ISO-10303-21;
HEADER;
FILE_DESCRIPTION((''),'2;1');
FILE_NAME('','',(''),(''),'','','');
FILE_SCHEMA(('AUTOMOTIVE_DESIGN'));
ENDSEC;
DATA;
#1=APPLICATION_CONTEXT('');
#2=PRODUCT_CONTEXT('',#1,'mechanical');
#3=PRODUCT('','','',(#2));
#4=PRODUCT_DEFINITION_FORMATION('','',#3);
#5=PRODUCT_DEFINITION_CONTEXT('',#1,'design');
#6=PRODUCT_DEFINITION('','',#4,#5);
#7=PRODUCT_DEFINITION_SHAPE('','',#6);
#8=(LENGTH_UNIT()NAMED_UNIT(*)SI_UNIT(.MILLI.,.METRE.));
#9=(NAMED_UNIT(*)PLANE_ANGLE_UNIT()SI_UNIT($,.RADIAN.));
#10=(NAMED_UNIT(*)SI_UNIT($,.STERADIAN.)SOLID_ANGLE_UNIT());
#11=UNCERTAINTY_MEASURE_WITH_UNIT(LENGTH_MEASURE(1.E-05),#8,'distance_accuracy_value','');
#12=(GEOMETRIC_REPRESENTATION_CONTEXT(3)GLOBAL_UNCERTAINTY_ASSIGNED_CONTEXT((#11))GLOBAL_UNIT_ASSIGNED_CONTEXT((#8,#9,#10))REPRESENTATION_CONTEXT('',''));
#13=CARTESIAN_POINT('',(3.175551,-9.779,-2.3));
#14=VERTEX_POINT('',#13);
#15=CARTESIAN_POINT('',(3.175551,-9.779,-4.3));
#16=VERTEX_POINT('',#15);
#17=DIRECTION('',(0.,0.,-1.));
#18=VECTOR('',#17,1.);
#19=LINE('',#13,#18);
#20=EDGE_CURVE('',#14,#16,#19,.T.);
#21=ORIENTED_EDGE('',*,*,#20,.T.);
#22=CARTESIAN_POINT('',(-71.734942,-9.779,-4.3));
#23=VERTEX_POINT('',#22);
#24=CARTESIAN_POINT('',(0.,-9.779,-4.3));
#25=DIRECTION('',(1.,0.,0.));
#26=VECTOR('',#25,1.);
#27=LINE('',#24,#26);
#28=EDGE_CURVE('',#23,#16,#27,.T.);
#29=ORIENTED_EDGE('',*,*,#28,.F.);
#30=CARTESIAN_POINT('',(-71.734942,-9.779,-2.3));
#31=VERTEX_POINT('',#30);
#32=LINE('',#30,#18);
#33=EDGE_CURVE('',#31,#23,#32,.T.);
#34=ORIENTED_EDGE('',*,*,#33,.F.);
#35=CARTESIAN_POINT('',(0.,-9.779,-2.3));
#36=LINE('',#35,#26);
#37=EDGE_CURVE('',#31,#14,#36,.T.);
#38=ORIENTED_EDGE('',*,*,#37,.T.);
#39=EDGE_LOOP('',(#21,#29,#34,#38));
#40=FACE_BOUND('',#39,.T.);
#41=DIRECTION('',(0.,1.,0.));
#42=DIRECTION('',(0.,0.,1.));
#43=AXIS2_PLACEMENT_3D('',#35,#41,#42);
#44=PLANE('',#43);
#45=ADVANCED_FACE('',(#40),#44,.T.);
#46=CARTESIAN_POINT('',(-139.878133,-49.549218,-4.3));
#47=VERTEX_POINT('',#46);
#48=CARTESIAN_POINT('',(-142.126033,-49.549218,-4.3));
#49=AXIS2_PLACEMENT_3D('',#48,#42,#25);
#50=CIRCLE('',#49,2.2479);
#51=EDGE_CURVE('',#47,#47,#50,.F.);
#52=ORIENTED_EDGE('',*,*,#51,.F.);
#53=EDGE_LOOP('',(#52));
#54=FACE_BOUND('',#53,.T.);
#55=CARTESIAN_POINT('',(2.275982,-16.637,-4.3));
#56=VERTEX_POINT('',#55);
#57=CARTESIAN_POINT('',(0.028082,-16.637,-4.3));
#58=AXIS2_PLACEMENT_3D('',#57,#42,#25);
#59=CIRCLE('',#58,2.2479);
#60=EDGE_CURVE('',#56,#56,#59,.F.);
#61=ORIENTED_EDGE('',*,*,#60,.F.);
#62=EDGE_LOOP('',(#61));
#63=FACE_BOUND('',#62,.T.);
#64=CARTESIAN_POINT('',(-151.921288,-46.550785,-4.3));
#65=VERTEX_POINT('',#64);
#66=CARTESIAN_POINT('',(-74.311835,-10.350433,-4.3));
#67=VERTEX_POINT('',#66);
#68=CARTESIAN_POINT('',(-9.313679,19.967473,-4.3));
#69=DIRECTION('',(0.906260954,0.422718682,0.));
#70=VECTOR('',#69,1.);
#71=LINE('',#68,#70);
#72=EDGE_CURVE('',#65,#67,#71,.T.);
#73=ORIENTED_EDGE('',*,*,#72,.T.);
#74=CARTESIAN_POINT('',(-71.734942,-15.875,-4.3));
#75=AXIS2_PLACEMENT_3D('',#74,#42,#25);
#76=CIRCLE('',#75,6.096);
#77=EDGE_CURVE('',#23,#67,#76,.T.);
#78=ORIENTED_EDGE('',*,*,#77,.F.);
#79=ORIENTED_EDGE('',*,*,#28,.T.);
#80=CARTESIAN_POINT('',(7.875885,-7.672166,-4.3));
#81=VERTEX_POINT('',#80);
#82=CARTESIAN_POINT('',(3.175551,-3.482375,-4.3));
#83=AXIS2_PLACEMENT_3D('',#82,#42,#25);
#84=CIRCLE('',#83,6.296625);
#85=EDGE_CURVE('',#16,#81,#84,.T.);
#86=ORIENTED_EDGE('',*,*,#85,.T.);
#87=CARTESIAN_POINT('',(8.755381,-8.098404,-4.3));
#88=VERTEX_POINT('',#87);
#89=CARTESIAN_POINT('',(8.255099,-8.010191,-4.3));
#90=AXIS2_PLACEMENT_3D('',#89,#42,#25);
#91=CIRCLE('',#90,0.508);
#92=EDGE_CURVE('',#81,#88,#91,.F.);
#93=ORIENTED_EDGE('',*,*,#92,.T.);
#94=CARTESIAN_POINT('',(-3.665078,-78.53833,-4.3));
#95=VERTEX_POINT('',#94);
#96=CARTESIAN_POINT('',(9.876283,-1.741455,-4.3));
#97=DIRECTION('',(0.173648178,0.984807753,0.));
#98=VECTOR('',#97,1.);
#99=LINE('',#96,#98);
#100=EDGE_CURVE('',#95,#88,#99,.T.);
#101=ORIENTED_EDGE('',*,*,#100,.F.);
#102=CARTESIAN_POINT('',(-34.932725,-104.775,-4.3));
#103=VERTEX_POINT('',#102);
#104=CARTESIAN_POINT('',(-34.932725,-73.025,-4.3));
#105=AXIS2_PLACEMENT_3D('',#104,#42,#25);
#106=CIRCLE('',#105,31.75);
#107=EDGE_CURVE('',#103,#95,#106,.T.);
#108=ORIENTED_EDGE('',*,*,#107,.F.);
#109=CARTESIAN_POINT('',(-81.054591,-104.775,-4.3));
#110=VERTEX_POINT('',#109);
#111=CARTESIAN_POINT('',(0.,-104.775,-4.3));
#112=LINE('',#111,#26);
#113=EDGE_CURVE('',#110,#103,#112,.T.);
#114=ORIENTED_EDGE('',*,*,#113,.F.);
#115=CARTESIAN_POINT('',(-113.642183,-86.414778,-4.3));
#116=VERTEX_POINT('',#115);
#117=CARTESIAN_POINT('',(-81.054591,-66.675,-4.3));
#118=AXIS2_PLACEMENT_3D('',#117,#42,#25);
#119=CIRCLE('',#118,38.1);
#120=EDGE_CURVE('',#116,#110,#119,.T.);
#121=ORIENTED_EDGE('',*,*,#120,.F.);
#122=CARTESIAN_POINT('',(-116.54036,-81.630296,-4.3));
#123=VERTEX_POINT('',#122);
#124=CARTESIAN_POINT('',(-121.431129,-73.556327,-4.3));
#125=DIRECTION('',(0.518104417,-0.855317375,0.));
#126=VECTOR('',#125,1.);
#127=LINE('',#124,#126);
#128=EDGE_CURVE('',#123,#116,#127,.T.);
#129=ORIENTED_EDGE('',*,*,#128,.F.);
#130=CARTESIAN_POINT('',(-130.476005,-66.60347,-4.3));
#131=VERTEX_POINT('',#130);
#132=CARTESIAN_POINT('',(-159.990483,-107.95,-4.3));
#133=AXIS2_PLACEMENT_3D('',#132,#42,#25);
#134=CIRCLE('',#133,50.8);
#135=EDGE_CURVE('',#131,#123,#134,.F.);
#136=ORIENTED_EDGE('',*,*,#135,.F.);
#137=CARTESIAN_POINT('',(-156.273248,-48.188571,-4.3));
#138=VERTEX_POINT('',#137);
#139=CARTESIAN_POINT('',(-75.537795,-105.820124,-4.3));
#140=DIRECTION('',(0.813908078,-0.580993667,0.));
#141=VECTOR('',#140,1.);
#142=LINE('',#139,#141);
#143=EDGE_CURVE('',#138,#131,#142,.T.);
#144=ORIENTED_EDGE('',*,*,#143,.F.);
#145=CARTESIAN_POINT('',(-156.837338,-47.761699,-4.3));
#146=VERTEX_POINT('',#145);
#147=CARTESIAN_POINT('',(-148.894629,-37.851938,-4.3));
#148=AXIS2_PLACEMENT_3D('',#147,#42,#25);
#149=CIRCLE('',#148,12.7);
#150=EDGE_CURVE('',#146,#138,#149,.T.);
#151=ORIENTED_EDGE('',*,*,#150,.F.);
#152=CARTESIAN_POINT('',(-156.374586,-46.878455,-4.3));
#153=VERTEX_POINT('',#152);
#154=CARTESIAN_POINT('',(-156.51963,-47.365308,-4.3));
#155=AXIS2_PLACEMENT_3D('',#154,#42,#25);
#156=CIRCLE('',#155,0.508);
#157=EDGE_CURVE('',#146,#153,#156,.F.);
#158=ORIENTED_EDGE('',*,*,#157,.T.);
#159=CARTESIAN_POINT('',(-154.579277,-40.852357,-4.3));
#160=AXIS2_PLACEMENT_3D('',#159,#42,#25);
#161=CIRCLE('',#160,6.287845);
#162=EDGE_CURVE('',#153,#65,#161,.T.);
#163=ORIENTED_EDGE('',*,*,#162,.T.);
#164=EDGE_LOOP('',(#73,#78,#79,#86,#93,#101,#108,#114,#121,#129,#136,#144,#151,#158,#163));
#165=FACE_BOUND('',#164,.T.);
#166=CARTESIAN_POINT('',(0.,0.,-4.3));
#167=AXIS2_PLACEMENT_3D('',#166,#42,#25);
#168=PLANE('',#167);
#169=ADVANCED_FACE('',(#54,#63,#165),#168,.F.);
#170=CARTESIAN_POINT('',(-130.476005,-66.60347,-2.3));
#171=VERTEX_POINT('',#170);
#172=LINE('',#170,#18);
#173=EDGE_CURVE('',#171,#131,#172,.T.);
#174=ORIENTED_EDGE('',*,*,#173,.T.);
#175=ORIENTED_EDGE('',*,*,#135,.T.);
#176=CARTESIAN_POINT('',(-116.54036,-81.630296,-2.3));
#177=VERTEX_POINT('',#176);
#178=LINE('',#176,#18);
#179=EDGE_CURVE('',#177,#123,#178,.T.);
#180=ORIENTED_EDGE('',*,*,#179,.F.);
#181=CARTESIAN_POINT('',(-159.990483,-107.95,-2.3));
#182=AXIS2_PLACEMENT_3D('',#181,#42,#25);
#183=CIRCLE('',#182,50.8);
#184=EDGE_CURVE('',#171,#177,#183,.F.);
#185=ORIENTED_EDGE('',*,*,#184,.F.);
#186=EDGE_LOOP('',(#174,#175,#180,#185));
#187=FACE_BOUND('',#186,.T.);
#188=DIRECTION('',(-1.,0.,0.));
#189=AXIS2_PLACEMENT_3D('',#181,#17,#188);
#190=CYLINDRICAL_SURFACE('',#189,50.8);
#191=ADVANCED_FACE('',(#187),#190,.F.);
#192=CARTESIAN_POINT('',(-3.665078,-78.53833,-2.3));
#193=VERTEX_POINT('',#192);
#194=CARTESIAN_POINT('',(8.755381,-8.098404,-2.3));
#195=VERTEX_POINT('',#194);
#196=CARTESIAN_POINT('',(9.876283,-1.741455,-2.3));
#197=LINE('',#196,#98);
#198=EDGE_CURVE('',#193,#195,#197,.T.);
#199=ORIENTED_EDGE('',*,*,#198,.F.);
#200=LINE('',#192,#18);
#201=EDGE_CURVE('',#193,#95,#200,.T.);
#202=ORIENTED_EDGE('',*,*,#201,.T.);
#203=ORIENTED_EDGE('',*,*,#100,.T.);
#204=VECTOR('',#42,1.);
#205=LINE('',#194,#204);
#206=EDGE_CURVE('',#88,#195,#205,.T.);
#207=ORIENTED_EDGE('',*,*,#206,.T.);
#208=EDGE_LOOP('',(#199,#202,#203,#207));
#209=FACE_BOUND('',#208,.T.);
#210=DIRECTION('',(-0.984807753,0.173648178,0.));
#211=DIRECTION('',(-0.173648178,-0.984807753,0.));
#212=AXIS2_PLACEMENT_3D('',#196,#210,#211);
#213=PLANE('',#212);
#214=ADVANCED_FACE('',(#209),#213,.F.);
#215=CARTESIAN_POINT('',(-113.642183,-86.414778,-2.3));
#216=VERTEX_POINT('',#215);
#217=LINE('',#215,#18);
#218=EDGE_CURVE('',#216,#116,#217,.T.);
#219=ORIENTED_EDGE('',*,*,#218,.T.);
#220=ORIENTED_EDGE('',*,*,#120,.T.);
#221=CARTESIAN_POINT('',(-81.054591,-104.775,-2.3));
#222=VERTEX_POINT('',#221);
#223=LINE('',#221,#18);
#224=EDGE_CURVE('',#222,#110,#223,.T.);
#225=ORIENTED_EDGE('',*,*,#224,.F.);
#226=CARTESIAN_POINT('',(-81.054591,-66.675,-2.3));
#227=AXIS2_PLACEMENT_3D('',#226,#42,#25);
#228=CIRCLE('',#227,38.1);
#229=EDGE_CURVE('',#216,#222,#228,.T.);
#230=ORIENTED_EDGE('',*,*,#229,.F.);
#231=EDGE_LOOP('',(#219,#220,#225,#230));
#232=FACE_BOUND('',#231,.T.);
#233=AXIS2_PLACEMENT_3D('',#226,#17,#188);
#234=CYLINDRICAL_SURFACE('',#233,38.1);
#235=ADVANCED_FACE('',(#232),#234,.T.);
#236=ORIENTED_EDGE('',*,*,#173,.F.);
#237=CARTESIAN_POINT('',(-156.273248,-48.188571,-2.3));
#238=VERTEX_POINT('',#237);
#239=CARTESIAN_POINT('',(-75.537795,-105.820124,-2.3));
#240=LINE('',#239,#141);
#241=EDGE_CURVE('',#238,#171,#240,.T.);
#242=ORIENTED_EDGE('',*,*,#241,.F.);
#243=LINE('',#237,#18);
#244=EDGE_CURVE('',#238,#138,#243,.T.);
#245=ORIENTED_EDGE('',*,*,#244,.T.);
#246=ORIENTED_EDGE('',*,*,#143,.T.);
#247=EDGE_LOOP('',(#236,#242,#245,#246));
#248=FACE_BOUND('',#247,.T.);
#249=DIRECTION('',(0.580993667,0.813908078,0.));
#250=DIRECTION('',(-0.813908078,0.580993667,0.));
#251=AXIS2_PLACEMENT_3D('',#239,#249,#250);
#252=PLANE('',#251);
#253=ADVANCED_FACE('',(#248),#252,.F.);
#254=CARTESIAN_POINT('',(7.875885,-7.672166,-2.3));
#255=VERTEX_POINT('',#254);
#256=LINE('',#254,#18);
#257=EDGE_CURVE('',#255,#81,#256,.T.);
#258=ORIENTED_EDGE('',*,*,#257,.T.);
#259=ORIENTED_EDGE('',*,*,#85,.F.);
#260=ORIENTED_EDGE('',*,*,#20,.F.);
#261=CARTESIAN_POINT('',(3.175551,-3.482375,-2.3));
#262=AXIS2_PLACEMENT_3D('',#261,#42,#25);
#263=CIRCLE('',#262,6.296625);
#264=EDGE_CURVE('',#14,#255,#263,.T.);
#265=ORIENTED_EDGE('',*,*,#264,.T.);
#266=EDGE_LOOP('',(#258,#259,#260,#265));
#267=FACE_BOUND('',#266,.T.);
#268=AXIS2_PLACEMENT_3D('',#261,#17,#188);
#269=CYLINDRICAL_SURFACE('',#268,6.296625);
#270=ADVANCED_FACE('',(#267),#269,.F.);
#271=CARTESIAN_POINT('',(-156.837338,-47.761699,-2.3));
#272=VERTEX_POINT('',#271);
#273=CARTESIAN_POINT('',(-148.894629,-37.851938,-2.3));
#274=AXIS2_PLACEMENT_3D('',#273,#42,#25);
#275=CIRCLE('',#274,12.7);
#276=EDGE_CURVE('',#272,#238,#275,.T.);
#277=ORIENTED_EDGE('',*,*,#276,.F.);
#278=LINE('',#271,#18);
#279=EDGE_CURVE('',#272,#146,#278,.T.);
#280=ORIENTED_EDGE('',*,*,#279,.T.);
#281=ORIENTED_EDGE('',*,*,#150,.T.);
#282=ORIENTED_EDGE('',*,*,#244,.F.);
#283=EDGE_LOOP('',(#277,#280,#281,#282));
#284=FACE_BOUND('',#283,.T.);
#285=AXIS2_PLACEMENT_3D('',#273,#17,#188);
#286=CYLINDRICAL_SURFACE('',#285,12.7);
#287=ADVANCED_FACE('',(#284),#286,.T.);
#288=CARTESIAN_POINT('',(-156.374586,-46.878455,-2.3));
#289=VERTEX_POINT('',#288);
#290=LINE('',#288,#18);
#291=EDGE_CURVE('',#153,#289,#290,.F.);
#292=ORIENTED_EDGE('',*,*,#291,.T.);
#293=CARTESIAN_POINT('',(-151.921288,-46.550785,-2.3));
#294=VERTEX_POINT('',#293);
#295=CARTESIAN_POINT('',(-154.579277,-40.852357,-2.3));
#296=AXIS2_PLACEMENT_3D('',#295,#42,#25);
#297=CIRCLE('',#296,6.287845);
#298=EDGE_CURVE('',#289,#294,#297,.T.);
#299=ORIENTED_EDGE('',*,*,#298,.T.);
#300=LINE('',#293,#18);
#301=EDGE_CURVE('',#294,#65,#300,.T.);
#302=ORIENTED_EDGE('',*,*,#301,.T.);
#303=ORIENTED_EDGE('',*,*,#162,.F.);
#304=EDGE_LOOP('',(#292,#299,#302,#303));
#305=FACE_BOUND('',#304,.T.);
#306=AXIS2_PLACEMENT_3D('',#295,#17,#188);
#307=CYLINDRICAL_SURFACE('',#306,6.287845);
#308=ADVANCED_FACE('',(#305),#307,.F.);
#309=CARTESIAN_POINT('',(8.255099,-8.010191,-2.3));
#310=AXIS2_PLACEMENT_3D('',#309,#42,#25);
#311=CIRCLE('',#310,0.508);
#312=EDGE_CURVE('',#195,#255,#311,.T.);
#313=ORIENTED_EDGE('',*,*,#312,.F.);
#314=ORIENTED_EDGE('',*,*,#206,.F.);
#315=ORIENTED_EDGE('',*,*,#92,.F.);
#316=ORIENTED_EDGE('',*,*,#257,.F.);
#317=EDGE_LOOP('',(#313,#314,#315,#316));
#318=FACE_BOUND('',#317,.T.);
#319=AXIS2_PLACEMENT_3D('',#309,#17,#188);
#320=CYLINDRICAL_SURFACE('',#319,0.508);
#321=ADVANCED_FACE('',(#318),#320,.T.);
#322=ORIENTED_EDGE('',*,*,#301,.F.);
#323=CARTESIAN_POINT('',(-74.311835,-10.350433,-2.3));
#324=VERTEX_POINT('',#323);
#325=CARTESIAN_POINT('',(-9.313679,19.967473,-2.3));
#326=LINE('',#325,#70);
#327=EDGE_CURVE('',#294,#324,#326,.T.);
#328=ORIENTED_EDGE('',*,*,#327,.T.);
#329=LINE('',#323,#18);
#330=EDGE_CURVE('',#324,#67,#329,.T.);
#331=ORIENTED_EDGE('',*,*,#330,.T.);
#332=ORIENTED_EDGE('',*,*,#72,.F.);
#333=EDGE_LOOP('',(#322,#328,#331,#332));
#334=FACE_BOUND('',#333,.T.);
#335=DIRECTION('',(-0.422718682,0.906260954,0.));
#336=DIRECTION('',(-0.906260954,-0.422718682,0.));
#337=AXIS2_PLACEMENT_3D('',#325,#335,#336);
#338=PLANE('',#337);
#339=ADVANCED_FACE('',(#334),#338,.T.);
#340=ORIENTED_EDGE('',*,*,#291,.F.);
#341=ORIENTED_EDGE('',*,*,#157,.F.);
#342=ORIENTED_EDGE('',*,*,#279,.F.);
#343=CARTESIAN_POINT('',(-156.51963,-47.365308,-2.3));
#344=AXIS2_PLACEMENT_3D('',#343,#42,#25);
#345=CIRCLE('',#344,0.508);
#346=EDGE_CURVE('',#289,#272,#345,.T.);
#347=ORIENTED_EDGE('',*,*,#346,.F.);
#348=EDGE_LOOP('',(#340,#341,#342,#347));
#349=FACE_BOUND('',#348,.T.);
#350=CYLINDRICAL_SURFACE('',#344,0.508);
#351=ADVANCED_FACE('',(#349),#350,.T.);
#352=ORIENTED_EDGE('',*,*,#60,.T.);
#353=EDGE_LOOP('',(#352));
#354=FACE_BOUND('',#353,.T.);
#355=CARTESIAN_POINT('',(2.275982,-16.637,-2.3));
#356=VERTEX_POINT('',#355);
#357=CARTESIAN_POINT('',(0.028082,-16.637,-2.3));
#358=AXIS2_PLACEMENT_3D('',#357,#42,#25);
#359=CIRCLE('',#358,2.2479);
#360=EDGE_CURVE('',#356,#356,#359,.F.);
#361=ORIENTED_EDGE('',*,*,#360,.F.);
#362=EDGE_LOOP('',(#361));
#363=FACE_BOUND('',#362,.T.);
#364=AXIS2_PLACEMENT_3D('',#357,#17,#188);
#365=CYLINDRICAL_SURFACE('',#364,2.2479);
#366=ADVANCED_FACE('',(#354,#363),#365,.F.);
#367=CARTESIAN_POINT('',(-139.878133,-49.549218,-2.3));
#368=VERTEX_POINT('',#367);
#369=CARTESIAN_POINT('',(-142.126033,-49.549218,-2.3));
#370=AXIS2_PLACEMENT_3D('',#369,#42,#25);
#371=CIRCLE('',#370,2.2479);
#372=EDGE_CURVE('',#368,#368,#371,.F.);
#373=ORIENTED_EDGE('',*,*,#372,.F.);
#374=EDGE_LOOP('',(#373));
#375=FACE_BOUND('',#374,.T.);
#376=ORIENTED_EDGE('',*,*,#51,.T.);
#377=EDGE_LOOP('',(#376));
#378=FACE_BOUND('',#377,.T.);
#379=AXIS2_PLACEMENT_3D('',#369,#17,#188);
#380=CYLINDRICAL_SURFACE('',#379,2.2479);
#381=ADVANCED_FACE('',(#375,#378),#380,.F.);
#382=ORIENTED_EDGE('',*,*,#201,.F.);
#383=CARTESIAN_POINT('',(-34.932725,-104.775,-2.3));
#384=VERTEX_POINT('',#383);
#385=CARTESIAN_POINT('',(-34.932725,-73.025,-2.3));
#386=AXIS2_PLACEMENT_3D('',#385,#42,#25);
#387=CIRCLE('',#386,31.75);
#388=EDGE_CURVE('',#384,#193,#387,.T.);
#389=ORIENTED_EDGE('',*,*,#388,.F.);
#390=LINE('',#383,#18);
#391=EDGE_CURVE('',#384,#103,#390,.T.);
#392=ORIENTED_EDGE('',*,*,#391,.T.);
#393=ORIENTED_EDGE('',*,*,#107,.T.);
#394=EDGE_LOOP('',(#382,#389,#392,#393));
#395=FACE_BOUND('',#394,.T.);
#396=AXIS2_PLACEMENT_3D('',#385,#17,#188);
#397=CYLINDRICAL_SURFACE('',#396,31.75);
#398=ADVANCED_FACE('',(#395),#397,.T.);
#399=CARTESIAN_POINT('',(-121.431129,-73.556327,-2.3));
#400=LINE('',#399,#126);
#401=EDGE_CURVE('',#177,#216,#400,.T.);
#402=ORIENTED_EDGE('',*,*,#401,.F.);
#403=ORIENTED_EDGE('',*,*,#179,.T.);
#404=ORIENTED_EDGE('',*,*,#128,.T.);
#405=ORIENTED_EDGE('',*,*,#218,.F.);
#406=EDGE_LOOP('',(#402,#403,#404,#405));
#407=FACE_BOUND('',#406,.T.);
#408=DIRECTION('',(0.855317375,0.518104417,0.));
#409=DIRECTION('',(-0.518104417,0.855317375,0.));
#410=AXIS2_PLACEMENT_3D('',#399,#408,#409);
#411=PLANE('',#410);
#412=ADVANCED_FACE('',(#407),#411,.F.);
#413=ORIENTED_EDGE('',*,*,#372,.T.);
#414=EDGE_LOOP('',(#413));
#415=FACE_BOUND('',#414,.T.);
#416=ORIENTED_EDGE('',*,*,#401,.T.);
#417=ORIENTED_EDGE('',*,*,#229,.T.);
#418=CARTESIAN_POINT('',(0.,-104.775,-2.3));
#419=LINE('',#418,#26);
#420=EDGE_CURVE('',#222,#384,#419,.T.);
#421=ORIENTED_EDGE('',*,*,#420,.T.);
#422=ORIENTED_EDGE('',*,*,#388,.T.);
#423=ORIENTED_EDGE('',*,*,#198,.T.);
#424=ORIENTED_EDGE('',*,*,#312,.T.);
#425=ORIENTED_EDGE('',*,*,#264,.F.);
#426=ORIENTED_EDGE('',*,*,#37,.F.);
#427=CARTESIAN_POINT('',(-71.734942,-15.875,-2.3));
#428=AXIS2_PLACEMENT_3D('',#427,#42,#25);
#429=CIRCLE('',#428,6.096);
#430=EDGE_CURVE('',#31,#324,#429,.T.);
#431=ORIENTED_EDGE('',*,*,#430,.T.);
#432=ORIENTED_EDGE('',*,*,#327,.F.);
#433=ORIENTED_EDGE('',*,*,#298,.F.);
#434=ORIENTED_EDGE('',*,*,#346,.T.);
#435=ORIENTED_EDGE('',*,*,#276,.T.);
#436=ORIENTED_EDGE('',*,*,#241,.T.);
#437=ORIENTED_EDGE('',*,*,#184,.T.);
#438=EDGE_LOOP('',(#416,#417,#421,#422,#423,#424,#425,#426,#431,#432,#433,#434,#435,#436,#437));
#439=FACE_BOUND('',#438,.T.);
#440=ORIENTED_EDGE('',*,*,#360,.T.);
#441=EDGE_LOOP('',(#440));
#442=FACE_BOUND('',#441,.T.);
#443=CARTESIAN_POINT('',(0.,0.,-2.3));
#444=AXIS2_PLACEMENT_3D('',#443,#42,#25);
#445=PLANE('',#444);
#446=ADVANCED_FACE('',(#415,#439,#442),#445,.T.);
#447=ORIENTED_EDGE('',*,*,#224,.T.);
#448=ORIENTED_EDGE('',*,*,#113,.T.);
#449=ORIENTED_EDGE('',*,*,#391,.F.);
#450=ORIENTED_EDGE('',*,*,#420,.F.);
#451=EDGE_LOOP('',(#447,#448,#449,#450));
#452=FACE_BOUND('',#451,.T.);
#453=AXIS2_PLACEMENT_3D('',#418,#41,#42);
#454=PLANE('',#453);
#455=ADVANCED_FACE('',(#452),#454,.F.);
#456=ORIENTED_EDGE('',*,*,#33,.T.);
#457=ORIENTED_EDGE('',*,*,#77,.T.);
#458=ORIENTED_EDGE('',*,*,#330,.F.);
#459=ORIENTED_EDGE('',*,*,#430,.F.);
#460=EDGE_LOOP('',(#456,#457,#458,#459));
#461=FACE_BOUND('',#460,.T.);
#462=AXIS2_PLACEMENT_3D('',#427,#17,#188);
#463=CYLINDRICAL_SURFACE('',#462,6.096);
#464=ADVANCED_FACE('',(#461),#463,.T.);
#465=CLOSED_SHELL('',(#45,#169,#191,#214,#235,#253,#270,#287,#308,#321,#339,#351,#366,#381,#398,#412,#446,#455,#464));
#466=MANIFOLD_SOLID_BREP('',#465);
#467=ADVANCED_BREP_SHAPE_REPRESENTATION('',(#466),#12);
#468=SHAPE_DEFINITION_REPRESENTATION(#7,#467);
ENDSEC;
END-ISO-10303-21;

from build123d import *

# Parameters (mm, degrees)
BOSS_EXTRUDE1_OUTLINE_R = 2.2479
BOSS_EXTRUDE1_DEPTH     = 2
FILLET1_R               = 0.508


# Read off the part's stored shape, not the designer's step: Boss-Extrude1
with BuildPart() as part:
    # Boss-Extrude1 outline → Boss-Extrude1 (new body)
    with BuildSketch(Plane.XY.offset(-4.3)):
        with BuildLine():
            Line((-3.665078359, -78.538329641), (9.376516015, -4.575772565))
            ThreePointArc((9.376516015, -4.575772565), (7.222943475, -8.305869622), (3.175551027, -9.779))
            Line((3.175551027, -9.779), (-71.734942292, -9.779))
            ThreePointArc((-71.734942292, -9.779), (-73.054687902, -9.923572648), (-74.311835376, -10.350433227))
            Line((-74.311835376, -10.350433227), (-151.921287837, -46.550785133))
            ThreePointArc((-151.921287837, -46.550785133), (-156.284298691, -46.904620517), (-159.820994296, -44.325309098))
            ThreePointArc((-159.820994296, -44.325309098), (-158.24873565, -46.442088317), (-156.273248149, -48.188570679))
            Line((-156.273248149, -48.188570679), (-130.476004779, -66.603469659))
            ThreePointArc((-130.476004779, -66.603469659), (-122.742535166, -73.406833136), (-116.540360394, -81.630295604))
            Line((-116.540360394, -81.630295604), (-113.642182841, -86.414778297))
            ThreePointArc((-113.642182841, -86.414778297), (-99.756521843, -99.869092495), (-81.054590835, -104.775))
            Line((-81.054590835, -104.775), (-34.932724517, -104.775))
            ThreePointArc((-34.932724517, -104.775), (-14.52421791, -97.346911069), (-3.665078359, -78.538329641))
        make_face()
        with Locations((-142.126033439, -49.549218379)):
            Circle(BOSS_EXTRUDE1_OUTLINE_R, mode=Mode.SUBTRACT)
        with Locations((0.028082134, -16.637)):
            Circle(BOSS_EXTRUDE1_OUTLINE_R, mode=Mode.SUBTRACT)
    extrude(amount=BOSS_EXTRUDE1_DEPTH)

    # Fillet1
    fillet1_edges = [part.edges().sort_by_distance(p)[0] for p in [
        (9.376516015, -4.575772565, -3.3),
        (-159.820994296, -44.325309098, -3.3),
    ]]
    fillet(fillet1_edges, radius=FILLET1_R)


solid = part.part
